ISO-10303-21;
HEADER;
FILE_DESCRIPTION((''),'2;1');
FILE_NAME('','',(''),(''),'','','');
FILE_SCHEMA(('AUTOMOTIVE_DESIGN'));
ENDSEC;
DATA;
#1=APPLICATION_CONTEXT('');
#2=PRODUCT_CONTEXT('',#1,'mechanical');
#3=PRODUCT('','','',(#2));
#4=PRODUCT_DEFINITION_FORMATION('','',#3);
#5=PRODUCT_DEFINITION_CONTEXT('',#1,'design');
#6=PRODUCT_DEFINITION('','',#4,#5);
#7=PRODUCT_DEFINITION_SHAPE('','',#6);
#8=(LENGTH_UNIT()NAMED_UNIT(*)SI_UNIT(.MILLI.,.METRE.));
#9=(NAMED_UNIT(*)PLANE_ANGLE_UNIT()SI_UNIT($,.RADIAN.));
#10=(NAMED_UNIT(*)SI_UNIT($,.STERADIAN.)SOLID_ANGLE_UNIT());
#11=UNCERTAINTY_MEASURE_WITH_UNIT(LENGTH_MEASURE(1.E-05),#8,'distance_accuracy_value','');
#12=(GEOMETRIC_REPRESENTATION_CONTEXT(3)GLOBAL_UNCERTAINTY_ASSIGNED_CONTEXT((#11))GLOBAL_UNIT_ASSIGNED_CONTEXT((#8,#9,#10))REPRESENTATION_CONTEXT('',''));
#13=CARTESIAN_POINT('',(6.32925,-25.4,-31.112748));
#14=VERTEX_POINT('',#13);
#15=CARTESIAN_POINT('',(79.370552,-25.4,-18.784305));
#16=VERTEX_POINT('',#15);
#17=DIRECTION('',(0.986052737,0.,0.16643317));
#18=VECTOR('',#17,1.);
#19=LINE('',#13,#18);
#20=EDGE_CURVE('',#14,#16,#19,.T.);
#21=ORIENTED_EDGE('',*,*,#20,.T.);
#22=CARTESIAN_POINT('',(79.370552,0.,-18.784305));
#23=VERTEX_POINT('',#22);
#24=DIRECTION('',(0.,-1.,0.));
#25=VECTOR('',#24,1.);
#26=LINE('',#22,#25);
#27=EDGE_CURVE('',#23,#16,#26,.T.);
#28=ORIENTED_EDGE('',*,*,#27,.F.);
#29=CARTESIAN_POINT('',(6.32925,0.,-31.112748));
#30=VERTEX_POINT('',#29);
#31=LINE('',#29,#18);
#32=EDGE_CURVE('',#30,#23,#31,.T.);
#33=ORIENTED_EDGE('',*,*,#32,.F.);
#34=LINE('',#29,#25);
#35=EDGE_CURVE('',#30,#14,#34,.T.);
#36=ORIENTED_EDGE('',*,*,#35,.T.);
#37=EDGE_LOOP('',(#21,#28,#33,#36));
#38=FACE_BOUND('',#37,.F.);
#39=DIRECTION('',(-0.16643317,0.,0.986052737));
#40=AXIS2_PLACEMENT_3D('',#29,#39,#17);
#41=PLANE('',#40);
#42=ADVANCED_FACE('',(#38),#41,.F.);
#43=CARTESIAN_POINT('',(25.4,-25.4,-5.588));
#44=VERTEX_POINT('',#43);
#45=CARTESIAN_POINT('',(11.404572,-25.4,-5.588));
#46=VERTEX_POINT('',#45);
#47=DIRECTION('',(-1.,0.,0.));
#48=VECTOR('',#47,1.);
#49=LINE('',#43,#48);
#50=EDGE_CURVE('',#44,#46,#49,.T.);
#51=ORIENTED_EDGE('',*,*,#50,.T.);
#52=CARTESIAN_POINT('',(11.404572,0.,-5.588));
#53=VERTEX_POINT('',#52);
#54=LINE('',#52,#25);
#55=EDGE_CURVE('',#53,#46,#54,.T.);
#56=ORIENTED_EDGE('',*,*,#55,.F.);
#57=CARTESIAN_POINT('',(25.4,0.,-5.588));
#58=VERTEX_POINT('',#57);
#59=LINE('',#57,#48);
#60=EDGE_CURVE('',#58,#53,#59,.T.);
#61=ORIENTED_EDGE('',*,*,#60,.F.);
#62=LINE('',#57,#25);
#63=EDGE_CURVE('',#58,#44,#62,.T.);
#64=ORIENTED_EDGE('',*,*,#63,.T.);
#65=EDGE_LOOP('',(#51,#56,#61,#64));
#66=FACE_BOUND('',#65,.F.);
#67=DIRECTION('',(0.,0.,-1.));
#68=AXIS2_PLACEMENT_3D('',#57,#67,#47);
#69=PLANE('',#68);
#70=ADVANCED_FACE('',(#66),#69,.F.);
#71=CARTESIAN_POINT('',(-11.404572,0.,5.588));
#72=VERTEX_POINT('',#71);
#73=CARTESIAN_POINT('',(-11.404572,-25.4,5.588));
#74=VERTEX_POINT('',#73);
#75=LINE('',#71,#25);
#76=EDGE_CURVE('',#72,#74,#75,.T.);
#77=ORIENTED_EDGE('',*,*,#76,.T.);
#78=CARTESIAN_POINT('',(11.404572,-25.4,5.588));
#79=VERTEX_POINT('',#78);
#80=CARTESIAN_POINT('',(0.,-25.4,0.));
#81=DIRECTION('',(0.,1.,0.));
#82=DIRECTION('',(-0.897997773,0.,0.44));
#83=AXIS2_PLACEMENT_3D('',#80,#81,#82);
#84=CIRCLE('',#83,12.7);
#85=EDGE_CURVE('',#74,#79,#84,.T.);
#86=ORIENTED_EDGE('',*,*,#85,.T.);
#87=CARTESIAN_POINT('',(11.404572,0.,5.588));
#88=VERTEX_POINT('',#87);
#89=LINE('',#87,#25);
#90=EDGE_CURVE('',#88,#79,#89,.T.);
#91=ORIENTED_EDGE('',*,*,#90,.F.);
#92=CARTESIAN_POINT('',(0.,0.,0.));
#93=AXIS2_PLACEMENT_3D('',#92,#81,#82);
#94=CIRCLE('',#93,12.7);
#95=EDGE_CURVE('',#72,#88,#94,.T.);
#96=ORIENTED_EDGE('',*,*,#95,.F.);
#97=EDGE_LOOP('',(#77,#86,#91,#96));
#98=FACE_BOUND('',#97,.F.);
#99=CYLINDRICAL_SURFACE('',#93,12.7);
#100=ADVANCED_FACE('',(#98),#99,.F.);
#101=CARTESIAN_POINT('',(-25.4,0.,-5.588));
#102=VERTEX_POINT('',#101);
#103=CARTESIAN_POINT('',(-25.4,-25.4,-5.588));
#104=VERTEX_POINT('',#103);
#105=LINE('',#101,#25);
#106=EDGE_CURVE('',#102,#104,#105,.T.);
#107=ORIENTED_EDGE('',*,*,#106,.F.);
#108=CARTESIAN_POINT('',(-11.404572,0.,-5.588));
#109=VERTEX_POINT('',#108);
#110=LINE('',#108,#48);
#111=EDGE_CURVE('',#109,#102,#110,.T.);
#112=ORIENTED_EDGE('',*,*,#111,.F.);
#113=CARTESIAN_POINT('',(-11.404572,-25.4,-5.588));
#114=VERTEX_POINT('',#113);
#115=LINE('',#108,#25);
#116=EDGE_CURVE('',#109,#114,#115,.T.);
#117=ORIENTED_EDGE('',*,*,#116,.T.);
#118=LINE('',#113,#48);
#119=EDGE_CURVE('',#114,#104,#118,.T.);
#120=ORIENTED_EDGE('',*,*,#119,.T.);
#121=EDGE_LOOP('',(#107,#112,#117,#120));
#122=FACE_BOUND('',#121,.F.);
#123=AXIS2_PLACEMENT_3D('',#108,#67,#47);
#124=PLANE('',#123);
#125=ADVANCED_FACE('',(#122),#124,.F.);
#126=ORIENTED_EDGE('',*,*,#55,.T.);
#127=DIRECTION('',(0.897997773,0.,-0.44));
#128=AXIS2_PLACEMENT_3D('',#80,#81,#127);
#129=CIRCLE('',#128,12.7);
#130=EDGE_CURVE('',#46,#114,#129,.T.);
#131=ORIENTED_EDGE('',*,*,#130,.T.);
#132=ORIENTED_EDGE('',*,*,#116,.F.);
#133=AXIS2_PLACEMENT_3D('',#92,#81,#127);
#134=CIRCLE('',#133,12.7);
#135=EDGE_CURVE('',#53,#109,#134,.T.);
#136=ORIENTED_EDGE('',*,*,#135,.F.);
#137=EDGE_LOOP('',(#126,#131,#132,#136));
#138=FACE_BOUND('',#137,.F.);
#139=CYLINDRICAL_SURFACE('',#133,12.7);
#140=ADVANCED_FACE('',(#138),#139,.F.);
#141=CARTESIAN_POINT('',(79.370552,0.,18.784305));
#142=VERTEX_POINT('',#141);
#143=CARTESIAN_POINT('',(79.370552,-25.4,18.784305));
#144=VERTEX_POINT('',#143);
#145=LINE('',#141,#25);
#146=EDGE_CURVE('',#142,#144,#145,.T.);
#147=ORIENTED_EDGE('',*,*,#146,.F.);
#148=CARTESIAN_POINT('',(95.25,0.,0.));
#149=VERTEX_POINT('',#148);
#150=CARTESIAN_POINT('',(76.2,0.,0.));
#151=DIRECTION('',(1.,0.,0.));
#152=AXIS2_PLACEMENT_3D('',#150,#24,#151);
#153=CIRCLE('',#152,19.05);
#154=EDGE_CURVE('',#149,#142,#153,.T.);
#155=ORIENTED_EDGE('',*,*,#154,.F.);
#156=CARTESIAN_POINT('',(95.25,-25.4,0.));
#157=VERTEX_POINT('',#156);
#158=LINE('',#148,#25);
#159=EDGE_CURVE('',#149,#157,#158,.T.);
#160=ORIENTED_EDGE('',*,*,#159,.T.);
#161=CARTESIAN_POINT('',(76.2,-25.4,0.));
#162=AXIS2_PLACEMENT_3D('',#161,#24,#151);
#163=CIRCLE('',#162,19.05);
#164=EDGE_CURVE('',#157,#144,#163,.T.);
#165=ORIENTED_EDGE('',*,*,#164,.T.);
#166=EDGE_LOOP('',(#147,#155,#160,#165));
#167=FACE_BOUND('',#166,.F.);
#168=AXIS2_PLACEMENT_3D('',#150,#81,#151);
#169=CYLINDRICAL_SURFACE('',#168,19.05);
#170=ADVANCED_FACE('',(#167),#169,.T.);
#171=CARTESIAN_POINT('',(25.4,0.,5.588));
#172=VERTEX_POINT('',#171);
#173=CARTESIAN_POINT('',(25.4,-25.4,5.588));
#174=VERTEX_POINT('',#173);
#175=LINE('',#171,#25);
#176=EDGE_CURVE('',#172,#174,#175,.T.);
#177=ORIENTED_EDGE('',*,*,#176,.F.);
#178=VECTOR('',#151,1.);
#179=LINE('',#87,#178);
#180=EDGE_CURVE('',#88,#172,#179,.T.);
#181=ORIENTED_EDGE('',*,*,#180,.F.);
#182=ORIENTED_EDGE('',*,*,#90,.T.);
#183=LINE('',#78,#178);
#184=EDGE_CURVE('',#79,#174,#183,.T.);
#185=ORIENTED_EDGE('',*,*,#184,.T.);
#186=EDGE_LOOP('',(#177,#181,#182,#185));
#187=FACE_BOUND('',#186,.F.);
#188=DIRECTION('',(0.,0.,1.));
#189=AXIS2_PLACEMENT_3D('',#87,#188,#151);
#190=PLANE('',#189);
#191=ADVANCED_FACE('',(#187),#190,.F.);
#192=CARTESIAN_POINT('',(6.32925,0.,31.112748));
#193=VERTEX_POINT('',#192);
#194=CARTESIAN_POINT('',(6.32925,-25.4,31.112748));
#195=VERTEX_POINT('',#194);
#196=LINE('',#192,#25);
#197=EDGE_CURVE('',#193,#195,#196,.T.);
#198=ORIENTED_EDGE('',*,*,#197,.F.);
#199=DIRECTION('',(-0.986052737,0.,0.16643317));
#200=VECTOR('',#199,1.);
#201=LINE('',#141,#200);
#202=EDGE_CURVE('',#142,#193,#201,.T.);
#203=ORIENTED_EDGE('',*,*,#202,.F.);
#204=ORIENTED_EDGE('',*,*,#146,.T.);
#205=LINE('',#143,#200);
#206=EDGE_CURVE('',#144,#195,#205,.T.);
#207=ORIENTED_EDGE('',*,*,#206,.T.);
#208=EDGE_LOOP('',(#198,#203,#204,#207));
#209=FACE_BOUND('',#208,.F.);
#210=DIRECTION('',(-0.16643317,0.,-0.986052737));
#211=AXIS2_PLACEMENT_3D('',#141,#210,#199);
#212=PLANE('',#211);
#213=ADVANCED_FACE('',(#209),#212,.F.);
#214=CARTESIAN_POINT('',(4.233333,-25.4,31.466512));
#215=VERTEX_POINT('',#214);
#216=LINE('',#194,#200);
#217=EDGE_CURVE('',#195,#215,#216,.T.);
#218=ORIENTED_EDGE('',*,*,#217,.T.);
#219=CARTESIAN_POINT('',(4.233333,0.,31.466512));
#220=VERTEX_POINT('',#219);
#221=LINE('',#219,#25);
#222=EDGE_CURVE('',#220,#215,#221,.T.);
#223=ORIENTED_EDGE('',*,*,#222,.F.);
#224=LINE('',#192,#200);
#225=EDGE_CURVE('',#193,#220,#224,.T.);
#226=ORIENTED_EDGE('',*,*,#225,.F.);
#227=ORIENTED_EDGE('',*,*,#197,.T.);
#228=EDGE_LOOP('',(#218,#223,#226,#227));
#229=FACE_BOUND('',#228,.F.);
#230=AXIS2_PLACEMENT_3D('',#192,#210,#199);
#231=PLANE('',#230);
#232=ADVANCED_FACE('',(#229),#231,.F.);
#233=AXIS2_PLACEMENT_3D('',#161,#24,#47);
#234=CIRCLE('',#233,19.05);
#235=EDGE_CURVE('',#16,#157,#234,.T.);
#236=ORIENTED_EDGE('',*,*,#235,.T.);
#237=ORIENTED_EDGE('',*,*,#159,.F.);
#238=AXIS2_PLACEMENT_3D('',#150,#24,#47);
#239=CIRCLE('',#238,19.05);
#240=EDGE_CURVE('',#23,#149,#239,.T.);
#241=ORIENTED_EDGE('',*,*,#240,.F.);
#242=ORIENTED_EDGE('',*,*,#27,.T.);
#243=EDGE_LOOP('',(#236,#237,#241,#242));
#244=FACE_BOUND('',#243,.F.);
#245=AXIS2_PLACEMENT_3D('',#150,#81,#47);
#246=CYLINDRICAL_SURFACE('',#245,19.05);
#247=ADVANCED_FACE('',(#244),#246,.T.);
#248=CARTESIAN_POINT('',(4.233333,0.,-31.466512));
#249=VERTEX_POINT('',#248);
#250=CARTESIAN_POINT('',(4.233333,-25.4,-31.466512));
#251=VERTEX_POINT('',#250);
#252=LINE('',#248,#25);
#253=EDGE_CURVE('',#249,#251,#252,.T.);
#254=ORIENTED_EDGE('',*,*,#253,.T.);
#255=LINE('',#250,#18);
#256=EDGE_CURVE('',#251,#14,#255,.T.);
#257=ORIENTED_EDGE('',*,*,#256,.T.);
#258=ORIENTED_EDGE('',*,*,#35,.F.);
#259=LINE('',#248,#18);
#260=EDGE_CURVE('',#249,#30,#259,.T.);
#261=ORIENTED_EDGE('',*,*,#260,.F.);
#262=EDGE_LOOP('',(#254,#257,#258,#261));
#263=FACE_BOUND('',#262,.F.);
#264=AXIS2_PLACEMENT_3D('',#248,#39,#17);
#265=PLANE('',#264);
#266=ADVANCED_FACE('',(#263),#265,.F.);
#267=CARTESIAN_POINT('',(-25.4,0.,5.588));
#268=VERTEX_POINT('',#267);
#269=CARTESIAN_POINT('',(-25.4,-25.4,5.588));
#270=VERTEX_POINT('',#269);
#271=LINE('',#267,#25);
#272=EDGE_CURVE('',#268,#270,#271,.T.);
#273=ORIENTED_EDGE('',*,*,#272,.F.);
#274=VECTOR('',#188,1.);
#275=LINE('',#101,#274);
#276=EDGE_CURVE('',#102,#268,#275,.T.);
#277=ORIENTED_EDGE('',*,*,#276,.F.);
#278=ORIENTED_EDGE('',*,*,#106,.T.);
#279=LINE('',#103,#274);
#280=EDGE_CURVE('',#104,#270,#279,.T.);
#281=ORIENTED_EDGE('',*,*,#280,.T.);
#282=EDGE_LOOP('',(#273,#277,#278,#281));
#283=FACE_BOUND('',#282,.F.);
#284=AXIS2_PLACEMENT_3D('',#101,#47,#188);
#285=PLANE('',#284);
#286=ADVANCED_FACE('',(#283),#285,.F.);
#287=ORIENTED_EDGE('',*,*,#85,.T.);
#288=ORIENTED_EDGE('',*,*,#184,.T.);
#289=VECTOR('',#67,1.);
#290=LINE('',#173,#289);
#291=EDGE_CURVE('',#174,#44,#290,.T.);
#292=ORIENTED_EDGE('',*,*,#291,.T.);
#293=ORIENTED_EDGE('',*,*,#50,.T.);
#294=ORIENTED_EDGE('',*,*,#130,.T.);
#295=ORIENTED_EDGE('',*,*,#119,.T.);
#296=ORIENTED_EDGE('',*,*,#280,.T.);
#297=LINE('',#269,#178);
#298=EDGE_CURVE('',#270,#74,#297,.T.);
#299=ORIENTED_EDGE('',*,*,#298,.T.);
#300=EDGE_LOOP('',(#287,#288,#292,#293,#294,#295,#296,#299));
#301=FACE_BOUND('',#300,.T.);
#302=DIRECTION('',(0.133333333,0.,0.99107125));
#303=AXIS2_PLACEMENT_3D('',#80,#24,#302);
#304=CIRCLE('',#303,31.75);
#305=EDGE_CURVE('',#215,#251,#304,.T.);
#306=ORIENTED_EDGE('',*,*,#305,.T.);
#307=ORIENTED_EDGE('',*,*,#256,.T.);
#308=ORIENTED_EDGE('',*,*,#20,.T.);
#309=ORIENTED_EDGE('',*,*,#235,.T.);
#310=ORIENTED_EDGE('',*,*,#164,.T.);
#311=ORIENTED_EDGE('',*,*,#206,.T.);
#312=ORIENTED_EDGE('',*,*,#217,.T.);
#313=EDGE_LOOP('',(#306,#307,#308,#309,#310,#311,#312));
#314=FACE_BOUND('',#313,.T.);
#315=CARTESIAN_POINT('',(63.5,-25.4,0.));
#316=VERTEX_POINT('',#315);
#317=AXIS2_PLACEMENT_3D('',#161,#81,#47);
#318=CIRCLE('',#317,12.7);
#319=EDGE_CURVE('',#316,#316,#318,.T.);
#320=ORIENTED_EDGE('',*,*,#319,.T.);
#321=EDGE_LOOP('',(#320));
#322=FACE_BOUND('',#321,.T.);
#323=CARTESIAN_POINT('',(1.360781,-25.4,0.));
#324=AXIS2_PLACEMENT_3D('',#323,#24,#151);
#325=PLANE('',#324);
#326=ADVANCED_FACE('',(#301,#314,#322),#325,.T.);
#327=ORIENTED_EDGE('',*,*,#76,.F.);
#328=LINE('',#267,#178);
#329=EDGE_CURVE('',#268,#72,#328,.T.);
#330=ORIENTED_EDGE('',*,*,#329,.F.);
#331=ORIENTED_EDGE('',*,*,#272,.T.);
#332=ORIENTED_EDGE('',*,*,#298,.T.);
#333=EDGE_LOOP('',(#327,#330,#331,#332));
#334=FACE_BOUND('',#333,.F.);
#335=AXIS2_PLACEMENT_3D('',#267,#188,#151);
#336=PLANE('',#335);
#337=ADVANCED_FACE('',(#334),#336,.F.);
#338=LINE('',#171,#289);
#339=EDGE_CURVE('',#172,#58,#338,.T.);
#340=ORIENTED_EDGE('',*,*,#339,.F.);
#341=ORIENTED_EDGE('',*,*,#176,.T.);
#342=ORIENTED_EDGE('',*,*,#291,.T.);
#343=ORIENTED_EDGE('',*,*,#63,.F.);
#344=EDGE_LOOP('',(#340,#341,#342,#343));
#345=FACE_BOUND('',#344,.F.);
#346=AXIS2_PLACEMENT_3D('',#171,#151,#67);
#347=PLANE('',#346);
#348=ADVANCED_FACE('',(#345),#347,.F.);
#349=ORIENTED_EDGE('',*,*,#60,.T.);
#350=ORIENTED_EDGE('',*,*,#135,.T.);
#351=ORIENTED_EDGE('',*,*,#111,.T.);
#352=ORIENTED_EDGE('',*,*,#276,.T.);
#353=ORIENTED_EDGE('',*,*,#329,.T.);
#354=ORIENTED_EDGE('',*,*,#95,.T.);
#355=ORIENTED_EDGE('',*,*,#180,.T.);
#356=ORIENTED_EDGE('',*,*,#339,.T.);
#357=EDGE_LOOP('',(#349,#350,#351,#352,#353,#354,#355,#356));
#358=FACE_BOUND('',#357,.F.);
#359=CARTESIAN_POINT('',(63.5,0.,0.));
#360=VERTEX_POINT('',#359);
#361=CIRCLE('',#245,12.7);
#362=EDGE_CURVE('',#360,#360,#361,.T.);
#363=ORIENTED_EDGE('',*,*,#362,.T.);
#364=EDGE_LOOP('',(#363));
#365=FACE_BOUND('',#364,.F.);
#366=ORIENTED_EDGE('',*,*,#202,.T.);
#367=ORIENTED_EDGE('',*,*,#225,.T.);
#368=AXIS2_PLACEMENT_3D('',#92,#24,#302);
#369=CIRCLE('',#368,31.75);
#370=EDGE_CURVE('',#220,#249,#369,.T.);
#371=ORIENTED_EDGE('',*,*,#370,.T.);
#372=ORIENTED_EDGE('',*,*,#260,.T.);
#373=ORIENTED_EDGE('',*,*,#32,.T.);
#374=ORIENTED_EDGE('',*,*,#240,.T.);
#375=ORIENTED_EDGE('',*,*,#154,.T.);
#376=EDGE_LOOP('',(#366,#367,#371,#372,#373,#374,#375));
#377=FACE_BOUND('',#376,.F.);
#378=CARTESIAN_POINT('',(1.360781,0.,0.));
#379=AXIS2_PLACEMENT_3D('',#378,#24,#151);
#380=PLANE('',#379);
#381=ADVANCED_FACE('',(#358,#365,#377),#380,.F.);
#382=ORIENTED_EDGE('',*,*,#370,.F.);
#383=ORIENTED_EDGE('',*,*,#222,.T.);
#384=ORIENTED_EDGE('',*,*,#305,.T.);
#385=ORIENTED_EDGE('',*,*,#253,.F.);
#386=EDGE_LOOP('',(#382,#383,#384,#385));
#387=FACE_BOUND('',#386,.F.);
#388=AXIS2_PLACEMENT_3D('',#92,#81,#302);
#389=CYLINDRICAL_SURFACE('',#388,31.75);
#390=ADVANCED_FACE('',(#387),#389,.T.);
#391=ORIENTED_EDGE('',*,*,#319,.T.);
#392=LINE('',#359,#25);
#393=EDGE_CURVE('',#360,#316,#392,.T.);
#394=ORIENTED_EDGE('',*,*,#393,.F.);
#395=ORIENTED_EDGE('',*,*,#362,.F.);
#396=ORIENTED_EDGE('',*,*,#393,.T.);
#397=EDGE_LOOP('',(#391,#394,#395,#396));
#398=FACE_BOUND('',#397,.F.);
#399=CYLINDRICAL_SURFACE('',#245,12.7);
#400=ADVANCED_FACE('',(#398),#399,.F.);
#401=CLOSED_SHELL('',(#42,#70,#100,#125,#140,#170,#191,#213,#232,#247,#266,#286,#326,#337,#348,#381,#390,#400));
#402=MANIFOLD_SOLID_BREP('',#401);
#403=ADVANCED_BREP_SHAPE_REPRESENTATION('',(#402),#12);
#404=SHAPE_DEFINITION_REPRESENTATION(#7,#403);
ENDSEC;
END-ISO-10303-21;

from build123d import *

# Parameters (mm, degrees)
F1_DEPTH = 25.4


with BuildPart() as f1:
    # F0 (on Front) → F1 (new body)
    with BuildSketch(Plane.XZ):
        with BuildLine():
            Line((6.3292504433, 31.1127480115), (4.2333333333, 31.4665121818))
            ThreePointArc((4.2333333333, 31.4665121818), (-31.75, 0), (4.2333333333, -31.4665121818))
            Line((4.2333333333, -31.4665121818), (6.3292504433, -31.1127480115))
            ThreePointArc((6.3292504433, -31.1127480115), (24.5867464457, -20.0886634501), (31.75, 0))
            ThreePointArc((31.75, 0), (24.5867464457, 20.0886634501), (6.3292504433, 31.1127480115))
        make_face()
        with BuildLine():
            Line((25.4, 5.588), (25.4, 0))
            Line((25.4, 0), (25.4, -5.588))
            Line((25.4, -5.588), (11.4045717149, -5.588))
            ThreePointArc((11.4045717149, -5.588), (0, -12.7), (-11.4045717149, -5.588))
            Line((-11.4045717149, -5.588), (-25.4, -5.588))
            Line((-25.4, -5.588), (-25.4, 5.588))
            Line((-25.4, 5.588), (-11.4045717149, 5.588))
            ThreePointArc((-11.4045717149, 5.588), (0, 12.7), (11.4045717149, 5.588))
            Line((11.4045717149, 5.588), (25.4, 5.588))
        make_face(mode=Mode.SUBTRACT)
        with BuildLine():
            Line((79.3705518859, 18.7843046381), (6.3292504433, 31.1127480115))
            ThreePointArc((6.3292504433, 31.1127480115), (24.5867464457, 20.0886634501), (31.75, 0))
            Line((31.75, 0), (57.15, 0))
            ThreePointArc((57.15, 0), (63.9015552493, 14.5482217715), (79.3705518859, 18.7843046381))
        make_face()
        with BuildLine():
            ThreePointArc((31.75, 0), (24.5867464457, -20.0886634501), (6.3292504433, -31.1127480115))
            Line((6.3292504433, -31.1127480115), (79.3705518859, -18.7843046381))
            ThreePointArc((79.3705518859, -18.7843046381), (63.9015552493, -14.5482217715), (57.15, 0))
            Line((57.15, 0), (31.75, 0))
        make_face()
        with BuildLine():
            ThreePointArc((95.25, 0), (90.7482217715, 12.2984447507), (79.3705518859, 18.7843046381))
            ThreePointArc((79.3705518859, 18.7843046381), (63.9015552493, 14.5482217715), (57.15, 0))
            ThreePointArc((57.15, 0), (63.9015552493, -14.5482217715), (79.3705518859, -18.7843046381))
            ThreePointArc((79.3705518859, -18.7843046381), (90.7482217715, -12.2984447507), (95.25, 0))
        make_face()
        with BuildLine():
            ThreePointArc((88.9, 0), (76.2, -12.7), (63.5, 0))
            ThreePointArc((63.5, 0), (76.2, 12.7), (88.9, 0))
        make_face(mode=Mode.SUBTRACT)
    extrude(amount=F1_DEPTH)


solid = f1.part
